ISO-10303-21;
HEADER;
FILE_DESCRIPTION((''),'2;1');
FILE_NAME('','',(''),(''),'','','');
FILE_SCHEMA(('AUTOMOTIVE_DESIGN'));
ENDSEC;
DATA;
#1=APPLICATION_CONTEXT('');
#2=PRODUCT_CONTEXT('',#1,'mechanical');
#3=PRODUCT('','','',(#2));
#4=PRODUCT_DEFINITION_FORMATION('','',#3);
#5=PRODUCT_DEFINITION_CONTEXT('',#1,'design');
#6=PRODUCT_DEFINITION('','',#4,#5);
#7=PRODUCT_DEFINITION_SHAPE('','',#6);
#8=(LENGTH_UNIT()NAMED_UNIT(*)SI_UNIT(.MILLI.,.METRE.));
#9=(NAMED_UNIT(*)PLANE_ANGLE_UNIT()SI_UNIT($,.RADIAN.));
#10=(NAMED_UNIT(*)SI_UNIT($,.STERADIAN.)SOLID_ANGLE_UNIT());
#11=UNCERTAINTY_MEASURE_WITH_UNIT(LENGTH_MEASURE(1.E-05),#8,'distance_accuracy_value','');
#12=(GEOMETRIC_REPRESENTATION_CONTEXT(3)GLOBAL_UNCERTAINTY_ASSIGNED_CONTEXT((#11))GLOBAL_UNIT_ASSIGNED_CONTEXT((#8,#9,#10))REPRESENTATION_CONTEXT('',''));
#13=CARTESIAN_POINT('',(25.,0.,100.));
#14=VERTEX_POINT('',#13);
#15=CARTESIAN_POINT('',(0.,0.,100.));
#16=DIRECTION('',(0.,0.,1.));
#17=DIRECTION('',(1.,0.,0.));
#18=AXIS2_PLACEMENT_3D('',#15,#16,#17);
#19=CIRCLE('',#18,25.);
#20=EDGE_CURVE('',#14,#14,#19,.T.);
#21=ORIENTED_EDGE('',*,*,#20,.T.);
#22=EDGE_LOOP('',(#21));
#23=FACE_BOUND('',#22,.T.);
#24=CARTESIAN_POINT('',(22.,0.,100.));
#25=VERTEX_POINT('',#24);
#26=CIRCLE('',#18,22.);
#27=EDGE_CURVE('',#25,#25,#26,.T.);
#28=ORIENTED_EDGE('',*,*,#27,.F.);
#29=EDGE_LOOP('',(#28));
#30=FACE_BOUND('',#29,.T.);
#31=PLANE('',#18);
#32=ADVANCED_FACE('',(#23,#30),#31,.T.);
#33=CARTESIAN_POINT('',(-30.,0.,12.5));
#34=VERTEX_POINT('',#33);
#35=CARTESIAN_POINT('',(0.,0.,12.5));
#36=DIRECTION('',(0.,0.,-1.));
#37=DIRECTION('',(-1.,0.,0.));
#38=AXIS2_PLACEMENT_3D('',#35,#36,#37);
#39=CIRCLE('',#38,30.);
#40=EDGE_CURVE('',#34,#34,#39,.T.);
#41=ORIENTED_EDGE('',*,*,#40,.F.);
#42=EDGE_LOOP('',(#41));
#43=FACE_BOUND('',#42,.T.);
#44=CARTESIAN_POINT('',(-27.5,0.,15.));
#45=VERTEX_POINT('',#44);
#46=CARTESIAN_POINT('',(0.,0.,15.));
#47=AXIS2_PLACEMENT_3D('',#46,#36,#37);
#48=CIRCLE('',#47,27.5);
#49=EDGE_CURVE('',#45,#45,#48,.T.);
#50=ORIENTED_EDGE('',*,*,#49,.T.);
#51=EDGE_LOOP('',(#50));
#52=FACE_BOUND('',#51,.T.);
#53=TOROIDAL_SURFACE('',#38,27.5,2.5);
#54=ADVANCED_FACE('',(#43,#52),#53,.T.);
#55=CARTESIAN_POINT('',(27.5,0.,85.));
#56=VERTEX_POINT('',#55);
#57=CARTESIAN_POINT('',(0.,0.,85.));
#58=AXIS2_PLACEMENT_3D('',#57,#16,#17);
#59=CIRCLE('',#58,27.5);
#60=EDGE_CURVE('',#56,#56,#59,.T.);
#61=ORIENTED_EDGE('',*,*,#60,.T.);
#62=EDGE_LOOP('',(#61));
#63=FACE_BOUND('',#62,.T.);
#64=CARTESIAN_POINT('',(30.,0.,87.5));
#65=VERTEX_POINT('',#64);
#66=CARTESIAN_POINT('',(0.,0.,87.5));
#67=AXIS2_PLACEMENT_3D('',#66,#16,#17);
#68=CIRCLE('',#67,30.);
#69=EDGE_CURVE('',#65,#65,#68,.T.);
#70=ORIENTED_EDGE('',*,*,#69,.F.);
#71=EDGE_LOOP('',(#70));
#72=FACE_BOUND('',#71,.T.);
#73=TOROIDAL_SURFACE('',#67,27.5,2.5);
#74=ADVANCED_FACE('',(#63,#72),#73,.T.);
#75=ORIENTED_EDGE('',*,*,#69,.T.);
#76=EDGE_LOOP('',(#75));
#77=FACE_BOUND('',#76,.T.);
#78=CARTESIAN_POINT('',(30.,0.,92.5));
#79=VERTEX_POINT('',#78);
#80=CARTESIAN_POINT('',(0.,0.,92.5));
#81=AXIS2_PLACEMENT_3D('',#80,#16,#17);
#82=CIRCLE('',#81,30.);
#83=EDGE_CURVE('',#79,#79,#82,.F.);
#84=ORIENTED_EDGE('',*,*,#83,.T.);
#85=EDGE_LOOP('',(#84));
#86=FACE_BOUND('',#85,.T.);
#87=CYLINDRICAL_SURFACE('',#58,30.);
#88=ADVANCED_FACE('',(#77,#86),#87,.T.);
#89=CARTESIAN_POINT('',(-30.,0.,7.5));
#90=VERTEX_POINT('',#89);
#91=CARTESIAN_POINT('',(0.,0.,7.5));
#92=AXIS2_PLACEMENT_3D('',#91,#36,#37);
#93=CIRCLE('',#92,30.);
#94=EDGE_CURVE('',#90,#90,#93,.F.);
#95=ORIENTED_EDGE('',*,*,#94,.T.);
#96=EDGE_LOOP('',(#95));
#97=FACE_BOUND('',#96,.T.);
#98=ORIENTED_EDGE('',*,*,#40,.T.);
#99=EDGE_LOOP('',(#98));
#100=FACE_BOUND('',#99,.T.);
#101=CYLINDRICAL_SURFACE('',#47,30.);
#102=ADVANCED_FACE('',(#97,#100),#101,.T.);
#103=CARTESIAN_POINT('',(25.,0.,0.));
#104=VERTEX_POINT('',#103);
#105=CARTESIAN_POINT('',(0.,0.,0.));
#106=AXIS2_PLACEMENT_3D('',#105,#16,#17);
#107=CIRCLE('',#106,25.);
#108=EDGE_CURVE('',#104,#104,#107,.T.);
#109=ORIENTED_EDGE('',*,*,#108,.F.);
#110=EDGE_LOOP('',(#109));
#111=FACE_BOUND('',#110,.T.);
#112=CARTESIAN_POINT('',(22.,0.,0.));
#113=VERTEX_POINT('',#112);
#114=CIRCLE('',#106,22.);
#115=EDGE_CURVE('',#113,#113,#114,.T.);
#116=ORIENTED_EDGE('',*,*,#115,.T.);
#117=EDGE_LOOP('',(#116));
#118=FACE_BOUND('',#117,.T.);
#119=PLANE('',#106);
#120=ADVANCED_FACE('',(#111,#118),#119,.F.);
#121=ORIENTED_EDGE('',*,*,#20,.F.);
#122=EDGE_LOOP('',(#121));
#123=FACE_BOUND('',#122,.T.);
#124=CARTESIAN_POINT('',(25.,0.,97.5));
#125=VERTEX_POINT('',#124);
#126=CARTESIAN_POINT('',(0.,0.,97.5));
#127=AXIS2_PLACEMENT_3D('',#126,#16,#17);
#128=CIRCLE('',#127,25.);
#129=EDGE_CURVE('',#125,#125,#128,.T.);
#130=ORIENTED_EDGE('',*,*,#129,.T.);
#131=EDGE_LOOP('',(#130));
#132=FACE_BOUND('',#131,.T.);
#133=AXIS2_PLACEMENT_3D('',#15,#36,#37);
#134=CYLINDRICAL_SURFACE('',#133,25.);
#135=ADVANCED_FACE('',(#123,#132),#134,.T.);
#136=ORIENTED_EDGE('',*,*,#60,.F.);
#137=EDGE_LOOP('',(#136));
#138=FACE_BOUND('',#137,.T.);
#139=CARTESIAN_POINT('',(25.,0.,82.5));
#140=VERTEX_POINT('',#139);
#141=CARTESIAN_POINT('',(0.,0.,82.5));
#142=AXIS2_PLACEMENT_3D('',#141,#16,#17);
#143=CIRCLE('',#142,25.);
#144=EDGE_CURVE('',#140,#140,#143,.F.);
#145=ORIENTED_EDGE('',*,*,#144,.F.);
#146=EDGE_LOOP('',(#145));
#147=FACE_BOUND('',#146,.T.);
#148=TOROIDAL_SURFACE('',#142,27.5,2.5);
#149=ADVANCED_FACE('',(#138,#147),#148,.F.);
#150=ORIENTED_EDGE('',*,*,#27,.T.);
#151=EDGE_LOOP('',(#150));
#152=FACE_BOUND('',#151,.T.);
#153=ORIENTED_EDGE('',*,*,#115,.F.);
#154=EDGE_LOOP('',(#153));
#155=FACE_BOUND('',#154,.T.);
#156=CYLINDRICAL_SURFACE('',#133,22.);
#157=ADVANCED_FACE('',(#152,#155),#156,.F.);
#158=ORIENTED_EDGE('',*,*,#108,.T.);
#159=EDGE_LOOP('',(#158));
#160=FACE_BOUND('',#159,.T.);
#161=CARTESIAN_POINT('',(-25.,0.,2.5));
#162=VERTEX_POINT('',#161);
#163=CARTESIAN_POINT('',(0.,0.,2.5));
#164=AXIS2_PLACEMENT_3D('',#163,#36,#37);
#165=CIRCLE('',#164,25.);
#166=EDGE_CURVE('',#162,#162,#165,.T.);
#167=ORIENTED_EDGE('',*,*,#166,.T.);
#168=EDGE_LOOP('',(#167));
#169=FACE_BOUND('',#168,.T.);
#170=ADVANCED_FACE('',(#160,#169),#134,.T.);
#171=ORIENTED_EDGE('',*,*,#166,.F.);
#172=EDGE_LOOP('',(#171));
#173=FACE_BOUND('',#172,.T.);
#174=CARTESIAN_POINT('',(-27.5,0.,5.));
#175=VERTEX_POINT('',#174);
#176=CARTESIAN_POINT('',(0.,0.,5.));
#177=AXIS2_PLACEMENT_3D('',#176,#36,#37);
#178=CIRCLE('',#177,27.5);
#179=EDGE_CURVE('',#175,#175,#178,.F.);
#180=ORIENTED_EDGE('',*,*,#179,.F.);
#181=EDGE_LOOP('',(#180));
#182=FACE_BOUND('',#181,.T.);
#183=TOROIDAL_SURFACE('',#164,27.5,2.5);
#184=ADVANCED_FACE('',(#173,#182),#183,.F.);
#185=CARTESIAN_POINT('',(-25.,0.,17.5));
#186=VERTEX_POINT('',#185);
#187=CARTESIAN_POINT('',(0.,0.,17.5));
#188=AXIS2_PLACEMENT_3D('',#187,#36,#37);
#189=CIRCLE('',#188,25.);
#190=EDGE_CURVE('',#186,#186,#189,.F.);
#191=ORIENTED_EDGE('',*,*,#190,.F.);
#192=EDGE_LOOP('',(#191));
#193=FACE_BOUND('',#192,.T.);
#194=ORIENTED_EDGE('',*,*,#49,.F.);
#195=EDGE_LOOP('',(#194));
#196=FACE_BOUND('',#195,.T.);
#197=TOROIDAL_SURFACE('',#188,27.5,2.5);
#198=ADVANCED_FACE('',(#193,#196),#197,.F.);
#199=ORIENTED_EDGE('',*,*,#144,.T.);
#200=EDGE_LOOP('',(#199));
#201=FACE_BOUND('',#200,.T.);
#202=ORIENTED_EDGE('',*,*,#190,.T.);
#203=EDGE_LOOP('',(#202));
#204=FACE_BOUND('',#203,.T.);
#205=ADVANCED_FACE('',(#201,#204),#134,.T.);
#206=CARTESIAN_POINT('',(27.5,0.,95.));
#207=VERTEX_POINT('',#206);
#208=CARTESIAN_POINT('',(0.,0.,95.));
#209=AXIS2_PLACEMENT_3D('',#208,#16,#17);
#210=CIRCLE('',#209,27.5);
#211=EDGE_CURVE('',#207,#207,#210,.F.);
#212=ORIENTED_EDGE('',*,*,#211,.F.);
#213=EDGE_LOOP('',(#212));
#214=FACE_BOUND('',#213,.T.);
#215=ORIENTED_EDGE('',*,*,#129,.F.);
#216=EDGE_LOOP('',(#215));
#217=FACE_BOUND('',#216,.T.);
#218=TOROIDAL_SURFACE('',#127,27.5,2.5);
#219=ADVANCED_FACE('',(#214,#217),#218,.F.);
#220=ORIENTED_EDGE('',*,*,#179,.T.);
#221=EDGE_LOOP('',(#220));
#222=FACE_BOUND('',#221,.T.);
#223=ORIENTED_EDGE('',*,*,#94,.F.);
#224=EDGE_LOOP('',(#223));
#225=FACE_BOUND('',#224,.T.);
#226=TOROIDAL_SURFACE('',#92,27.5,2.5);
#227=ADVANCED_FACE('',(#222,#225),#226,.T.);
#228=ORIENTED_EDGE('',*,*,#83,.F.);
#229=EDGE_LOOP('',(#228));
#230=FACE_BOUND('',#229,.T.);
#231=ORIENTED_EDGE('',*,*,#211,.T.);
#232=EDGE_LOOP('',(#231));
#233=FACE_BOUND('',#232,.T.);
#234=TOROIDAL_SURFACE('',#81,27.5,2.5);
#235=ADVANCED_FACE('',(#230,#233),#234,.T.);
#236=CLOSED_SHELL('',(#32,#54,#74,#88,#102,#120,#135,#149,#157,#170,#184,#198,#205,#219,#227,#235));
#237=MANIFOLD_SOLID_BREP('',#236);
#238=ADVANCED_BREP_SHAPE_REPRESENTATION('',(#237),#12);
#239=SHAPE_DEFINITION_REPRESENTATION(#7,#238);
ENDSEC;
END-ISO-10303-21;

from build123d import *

# Parameters (mm, degrees)
SKETCH_1_R             = 25
SKETCH_1_R_2           = 22
EXTRUDE_1_DEPTH        = 100
EXTRUDE_START          = -15
SKETCH_2_R             = 30
SKETCH_2_R_2           = 25
EXTRUDE_2_DEPTH        = 10
FILLET_1_R             = 2.5
FILLET_1_OF_MIRROR_1_R = 2.5


with BuildPart() as part:
    # Эскиз1 → Бобышка-Вытянуть1 (new body)
    with BuildSketch(Plane.XY):
        Circle(SKETCH_1_R)
        Circle(SKETCH_1_R_2, mode=Mode.SUBTRACT)
    extrude(amount=EXTRUDE_1_DEPTH)

    # Эскиз2 → Бобышка-Вытянуть2 (add)
    with BuildSketch(Plane.XY.offset(100).offset(EXTRUDE_START)):
        Circle(SKETCH_2_R)
        Circle(SKETCH_2_R_2, mode=Mode.SUBTRACT)
    extrude_2 = extrude(amount=EXTRUDE_2_DEPTH)

    # Скругление1
    fillet_1_edges = [part.edges().sort_by_distance(p)[0] for p in [
        (-25, 0, 85),
        (-25, 0, 95),
        (-30, 0, 85),
        (-30, 0, 95),
    ]]
    fillet(fillet_1_edges, radius=FILLET_1_R - 0.0001)  # a hair under: the kernel refuses the full size

    # Зеркальное отражение1: Бобышка-Вытянуть2 across plane
    add(extrude_2.mirror(Plane.XY.offset(50)))

    # Скругление1 of Зеркальное отражение1
    fillet_1_of_mirror_1_edges = [part.edges().sort_by_distance(p)[0] for p in [
        (-25, 0, 15),
        (-25, 0, 5),
        (-30, 0, 15),
        (-30, 0, 5),
    ]]
    fillet(fillet_1_of_mirror_1_edges, radius=FILLET_1_OF_MIRROR_1_R - 0.0001)  # a hair under: the kernel refuses the full size


solid = part.part
